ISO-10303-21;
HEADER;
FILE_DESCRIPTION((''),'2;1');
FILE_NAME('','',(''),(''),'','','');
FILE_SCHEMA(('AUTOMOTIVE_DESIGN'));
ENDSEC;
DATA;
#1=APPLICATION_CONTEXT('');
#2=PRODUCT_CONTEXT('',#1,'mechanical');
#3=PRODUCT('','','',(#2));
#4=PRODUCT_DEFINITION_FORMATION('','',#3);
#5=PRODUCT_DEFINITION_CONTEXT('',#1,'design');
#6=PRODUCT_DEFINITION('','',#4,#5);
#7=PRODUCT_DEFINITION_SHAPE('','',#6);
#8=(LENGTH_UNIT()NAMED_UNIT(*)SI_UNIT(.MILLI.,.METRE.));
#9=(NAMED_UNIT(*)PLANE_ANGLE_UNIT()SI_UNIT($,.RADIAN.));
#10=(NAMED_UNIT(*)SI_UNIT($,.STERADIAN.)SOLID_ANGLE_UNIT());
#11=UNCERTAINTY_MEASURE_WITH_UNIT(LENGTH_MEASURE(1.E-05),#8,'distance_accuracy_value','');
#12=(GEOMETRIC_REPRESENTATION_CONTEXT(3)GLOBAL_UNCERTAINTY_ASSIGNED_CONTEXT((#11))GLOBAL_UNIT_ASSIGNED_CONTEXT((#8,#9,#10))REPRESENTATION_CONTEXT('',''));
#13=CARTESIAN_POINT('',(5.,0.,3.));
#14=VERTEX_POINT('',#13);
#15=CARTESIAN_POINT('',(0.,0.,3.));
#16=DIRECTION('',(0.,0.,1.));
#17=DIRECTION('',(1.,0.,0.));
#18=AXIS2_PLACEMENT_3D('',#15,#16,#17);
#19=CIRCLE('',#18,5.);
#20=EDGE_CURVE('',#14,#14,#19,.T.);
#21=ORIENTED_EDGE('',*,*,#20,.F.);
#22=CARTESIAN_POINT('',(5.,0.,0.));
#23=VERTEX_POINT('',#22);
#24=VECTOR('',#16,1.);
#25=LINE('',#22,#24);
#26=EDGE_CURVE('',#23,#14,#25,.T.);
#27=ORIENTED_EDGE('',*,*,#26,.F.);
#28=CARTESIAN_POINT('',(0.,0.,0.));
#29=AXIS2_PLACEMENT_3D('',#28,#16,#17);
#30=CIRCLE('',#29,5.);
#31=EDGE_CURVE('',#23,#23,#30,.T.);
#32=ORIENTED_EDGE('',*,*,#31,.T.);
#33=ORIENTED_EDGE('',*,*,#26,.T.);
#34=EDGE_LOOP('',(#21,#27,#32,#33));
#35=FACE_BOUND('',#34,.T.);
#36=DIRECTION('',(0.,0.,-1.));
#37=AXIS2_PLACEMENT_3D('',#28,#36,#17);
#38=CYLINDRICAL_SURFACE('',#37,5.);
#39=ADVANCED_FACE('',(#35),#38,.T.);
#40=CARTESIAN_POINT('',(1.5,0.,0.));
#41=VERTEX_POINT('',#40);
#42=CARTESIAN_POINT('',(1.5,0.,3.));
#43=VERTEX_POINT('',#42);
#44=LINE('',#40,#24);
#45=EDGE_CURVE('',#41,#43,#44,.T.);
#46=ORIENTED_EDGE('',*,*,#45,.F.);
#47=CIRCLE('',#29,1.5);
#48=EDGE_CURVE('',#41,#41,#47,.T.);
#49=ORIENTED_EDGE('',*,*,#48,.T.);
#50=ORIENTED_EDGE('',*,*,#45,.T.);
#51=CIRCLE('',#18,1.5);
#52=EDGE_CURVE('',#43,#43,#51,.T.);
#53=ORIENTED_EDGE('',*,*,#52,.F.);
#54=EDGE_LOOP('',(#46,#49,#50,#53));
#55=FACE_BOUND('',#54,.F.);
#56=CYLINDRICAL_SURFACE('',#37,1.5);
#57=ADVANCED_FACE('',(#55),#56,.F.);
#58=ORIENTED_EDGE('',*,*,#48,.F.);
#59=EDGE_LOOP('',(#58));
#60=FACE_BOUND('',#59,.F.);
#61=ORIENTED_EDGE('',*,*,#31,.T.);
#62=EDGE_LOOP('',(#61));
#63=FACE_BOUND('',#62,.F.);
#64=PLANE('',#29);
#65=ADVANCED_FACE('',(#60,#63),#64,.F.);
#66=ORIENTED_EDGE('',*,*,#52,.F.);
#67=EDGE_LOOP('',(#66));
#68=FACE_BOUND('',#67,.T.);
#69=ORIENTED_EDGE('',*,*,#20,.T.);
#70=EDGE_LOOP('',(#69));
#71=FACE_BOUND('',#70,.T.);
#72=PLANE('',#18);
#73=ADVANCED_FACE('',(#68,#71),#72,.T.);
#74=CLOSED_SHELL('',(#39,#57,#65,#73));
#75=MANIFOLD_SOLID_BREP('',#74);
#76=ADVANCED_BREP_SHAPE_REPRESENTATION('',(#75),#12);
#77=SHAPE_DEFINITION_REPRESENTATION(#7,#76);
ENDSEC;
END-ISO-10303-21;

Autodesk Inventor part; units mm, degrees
ref_plane "YZ Plane" through (0, 0, 0) normal (1, 0, 0) x (0, 1, 0)
ref_plane "XZ Plane" through (0, 0, 0) normal (0, 1, 0) x (-1, 0, 0)
ref_plane "XY Plane" through (0, 0, 0) normal (0, 0, 1) x (1, 0, 0)
sketch "Boceto1" plane through (0, 0, 0) normal (0, 0, 1) x (1, 0, 0)
  circle A0 centre (0, 0) radius 2.1 projected
  circle A1 centre (0, 0) radius 3.9 projected
  circle A2 centre (0, 0) radius 5
  circle A3 centre (0, 0) radius 1.5
  dimension "d0" = 10
  dimension "d3" = 3
extrude "Extrusión1" add sketch "Boceto1" along normal blind 3 contours A0 | A1 | A2
properties part number "Tope_Dosificador"
